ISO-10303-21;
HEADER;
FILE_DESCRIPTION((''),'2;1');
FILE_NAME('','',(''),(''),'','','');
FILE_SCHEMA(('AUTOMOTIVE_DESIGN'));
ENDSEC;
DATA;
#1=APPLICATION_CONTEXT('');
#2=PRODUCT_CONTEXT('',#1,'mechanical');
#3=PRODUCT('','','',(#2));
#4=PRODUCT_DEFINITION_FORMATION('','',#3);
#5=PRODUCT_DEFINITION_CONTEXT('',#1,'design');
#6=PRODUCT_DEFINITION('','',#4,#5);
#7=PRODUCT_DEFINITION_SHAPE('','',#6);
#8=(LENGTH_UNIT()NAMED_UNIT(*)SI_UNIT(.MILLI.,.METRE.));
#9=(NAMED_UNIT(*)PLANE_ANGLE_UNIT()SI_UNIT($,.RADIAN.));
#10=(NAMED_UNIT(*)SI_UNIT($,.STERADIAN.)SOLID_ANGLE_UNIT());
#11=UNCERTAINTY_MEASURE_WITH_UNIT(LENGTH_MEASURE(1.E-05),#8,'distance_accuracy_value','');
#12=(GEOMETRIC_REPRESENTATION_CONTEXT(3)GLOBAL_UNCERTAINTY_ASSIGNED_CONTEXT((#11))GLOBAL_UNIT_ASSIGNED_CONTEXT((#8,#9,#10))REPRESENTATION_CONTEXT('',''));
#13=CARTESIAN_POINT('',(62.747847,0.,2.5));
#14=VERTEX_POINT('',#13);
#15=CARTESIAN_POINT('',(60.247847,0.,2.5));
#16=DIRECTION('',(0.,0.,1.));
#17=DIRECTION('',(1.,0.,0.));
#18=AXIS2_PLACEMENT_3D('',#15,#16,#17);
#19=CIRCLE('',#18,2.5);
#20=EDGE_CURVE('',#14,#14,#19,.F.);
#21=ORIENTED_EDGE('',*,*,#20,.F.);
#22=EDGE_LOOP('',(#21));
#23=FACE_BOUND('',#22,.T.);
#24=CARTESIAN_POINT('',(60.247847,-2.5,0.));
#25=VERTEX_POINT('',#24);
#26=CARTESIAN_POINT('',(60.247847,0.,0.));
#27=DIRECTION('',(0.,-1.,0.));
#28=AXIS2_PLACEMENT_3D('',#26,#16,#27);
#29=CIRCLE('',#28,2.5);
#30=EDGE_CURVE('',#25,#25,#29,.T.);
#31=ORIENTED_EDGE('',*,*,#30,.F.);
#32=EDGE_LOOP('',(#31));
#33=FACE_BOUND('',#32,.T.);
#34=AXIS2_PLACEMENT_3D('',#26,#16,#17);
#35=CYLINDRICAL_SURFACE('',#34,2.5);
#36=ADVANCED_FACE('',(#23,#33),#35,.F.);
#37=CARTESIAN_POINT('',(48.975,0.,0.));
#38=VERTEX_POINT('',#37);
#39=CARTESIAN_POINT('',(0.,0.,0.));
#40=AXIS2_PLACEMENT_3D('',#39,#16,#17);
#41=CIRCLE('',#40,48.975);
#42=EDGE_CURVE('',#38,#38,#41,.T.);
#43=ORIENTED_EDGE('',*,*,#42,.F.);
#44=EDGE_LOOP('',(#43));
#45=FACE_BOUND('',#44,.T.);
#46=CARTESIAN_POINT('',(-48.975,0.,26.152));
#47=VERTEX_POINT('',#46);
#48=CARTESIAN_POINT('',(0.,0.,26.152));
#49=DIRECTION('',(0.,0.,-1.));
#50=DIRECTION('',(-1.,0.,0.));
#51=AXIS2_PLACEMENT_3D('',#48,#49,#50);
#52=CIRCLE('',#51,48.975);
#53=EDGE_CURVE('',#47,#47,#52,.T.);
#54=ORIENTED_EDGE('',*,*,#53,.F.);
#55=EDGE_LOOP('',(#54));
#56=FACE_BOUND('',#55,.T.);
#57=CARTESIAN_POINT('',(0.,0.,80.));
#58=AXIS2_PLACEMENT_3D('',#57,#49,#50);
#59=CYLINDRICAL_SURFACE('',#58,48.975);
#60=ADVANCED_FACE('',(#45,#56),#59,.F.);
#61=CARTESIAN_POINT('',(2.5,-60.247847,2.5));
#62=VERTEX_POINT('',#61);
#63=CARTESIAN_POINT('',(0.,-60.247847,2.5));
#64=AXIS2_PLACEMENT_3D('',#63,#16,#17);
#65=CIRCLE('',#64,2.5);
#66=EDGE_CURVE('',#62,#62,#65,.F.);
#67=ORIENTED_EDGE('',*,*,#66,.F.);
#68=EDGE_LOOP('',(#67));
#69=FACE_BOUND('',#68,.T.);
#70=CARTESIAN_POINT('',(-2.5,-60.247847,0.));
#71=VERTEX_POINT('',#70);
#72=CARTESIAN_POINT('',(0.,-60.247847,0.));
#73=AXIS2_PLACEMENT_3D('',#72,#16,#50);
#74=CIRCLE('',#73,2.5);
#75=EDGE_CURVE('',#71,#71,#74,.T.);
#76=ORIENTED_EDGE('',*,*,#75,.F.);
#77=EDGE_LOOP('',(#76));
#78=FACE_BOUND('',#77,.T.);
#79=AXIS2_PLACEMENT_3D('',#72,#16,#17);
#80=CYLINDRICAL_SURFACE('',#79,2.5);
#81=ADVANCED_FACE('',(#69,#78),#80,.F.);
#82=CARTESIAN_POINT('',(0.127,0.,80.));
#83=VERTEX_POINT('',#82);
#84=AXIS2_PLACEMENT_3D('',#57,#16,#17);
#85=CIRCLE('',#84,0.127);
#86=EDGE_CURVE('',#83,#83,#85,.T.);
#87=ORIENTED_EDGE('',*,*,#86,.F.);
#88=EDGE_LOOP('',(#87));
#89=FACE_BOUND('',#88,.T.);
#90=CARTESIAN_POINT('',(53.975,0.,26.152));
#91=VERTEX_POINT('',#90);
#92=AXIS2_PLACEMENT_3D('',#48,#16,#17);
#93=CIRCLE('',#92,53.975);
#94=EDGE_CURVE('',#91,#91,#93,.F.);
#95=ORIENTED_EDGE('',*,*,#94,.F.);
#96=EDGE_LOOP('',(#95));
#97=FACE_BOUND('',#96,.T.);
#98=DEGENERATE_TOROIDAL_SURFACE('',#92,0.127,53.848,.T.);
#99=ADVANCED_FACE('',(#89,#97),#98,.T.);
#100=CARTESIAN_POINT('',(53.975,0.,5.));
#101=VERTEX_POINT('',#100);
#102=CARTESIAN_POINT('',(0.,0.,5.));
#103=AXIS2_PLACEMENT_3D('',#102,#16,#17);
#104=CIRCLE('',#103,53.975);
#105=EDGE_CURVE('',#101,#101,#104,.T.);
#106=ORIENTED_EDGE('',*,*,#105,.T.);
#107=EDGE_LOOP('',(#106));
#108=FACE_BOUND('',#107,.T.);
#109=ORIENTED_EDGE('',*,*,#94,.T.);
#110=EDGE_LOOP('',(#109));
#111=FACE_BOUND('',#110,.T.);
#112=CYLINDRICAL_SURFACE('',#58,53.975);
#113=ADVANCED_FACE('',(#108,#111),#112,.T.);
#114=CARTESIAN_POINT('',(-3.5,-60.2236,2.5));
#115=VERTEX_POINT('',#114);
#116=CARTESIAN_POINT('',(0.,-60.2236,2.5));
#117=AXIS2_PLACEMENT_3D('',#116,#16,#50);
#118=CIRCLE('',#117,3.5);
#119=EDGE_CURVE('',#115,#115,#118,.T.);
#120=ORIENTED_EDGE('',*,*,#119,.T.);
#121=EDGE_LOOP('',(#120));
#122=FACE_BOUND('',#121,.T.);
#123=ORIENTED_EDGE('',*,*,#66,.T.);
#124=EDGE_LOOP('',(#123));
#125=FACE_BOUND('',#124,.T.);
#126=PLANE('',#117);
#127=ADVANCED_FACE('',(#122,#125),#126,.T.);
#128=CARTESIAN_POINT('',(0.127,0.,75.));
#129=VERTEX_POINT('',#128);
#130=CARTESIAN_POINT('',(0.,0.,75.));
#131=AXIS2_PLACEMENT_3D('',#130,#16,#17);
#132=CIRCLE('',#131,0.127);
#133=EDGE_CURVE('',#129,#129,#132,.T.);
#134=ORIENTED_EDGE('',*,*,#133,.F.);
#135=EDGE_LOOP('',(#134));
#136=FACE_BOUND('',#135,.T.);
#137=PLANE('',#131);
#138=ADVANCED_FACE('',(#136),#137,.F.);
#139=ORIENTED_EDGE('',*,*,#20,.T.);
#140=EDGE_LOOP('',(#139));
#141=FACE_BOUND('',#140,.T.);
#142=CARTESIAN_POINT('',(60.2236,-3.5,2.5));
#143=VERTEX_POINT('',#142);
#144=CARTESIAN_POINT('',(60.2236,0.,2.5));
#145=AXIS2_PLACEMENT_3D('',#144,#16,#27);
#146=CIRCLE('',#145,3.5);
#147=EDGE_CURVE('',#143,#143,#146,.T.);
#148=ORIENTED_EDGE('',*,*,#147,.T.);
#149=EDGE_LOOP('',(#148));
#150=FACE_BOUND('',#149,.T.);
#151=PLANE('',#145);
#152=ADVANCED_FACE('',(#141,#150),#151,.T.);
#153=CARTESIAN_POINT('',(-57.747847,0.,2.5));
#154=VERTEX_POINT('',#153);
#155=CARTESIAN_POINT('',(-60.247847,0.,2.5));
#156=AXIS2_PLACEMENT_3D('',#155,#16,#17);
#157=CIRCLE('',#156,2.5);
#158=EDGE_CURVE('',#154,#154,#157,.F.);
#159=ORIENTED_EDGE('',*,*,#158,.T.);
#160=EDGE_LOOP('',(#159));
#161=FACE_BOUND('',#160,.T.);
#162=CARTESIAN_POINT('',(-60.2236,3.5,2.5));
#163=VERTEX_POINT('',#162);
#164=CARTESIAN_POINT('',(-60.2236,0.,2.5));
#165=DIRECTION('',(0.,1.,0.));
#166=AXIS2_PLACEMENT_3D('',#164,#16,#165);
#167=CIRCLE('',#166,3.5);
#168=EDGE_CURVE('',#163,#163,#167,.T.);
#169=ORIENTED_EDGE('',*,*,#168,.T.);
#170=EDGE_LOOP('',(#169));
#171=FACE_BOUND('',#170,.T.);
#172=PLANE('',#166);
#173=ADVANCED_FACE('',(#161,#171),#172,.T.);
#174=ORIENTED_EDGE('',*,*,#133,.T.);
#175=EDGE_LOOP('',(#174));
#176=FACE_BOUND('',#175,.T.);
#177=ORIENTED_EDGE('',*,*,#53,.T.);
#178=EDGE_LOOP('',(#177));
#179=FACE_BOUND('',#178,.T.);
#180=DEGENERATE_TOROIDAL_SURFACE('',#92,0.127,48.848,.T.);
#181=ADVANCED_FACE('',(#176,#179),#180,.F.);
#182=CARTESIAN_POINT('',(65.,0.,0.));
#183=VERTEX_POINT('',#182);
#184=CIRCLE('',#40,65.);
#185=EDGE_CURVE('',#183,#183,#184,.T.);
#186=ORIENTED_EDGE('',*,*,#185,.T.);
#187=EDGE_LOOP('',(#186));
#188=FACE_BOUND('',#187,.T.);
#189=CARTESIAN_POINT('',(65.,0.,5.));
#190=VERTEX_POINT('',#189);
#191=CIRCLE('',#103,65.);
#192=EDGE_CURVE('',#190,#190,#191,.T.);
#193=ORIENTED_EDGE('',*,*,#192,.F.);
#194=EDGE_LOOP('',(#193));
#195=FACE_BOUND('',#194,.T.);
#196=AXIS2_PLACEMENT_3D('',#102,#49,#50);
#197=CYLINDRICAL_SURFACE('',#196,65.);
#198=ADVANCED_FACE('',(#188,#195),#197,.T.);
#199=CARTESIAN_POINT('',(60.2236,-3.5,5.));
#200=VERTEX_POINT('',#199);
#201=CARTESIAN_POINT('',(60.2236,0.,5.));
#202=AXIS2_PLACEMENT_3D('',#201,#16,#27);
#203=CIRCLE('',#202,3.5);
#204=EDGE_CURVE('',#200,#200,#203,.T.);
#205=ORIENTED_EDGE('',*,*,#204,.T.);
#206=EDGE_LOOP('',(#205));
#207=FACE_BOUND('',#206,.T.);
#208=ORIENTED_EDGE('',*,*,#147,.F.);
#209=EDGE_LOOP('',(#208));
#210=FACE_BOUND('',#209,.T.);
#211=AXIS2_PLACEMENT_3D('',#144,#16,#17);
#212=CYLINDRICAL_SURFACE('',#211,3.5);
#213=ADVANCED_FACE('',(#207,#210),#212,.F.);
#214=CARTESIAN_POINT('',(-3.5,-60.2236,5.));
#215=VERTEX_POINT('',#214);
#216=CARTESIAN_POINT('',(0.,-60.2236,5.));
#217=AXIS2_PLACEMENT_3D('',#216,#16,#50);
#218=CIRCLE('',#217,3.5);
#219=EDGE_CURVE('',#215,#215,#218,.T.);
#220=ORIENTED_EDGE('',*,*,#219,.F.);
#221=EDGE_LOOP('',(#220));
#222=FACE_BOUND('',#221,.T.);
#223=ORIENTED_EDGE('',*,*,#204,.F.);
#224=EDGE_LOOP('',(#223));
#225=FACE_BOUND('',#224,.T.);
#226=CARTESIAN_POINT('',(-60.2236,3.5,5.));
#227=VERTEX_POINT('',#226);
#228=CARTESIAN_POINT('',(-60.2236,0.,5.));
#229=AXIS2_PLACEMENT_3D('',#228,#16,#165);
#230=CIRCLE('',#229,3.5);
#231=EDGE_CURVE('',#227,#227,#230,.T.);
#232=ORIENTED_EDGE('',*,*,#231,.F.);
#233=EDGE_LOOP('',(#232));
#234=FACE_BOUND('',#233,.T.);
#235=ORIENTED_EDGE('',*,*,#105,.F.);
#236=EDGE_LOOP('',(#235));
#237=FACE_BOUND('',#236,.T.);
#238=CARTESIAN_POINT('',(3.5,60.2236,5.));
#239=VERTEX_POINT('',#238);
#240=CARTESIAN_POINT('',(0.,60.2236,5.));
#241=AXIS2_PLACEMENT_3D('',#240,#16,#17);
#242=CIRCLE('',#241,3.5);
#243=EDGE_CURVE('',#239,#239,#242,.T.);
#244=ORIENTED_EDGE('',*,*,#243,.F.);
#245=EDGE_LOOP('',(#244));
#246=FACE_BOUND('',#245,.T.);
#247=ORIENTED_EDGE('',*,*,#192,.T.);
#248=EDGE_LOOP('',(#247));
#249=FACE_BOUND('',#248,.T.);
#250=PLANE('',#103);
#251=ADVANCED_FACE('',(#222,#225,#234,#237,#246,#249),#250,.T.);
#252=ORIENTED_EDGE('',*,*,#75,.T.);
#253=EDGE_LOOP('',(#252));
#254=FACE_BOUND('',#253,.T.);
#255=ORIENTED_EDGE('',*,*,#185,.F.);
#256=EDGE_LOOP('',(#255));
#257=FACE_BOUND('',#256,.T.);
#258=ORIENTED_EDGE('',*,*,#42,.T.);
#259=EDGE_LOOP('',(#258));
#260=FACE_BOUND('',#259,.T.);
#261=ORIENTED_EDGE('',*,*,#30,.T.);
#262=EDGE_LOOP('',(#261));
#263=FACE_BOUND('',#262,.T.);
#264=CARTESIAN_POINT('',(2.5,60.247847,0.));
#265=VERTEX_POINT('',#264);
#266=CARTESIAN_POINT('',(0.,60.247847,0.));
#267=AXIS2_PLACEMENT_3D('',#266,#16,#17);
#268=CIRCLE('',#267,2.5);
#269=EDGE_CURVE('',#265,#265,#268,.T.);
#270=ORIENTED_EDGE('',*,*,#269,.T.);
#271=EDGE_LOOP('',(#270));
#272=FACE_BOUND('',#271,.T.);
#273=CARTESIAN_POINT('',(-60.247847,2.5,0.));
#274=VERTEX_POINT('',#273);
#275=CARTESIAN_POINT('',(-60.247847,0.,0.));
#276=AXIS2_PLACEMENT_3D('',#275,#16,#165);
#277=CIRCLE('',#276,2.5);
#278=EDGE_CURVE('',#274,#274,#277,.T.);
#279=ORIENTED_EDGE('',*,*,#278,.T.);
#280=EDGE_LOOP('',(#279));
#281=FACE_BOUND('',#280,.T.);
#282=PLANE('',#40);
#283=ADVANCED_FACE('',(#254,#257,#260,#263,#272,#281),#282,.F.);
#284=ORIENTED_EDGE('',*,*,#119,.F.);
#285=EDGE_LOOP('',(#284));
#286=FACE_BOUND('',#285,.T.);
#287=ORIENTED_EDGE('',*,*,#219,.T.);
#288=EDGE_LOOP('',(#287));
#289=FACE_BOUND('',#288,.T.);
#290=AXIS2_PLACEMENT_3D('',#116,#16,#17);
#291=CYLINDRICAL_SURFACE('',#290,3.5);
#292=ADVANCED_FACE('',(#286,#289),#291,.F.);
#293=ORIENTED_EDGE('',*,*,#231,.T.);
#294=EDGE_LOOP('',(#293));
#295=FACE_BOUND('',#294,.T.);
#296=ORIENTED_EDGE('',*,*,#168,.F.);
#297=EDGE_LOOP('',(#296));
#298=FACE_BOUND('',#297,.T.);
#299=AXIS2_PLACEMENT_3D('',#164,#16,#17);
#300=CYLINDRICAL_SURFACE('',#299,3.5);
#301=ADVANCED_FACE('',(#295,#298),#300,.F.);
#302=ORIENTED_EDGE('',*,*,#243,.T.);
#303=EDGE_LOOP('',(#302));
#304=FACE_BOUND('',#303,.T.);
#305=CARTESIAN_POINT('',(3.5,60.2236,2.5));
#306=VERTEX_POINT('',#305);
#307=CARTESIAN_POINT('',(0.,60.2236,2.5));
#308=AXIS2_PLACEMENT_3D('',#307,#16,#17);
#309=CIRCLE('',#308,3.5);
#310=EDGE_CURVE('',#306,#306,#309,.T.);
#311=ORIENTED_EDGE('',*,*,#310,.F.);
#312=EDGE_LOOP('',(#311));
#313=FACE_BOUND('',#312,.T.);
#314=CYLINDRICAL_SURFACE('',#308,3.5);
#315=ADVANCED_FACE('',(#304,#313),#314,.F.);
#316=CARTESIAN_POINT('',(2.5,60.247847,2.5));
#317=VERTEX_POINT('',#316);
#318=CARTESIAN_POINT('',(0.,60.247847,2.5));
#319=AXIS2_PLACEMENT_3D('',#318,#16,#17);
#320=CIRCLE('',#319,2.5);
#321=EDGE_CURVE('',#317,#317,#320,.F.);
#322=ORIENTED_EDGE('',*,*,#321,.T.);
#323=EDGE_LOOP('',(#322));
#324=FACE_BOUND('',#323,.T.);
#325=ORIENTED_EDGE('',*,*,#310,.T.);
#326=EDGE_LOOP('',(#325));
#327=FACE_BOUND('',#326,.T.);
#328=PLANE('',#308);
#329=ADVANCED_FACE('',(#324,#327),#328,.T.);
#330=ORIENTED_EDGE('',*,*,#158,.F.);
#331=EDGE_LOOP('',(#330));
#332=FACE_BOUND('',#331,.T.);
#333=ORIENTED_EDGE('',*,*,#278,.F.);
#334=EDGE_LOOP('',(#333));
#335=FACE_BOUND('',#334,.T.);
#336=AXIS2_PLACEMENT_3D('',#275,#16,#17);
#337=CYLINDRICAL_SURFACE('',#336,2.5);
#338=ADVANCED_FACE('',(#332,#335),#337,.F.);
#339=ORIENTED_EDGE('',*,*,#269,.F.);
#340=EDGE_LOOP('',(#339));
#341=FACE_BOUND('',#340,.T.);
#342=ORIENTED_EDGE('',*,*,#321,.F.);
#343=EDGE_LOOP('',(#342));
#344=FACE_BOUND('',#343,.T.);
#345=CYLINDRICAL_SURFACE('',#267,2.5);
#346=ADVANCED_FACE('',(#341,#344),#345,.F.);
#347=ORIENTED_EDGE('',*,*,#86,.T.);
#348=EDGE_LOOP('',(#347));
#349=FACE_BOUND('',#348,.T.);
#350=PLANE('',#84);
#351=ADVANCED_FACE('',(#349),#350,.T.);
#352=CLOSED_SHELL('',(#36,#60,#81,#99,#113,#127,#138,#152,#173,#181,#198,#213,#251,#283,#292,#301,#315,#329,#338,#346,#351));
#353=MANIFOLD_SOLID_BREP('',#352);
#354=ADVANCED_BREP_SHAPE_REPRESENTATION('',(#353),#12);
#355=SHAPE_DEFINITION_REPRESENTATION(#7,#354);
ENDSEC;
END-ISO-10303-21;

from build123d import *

# Parameters (mm, degrees)
SKETCH2_R           = 65
BOSS_EXTRUDE1_DEPTH = 5
SKETCH3_R           = 53.975
BOSS_EXTRUDE2_DEPTH = 75
FILLET7_R           = 53.848
SKETCH7_R           = 2.5
CUT_EXTRUDE2_DEPTH  = 5
SKETCH8_R           = 3.5
CUT_EXTRUDE3_DEPTH  = 2.5
CIRPATTERN1_COUNT   = 4


# Read off the part's stored shape, not the designer's step: Shell1
with BuildPart() as part:
    # Sketch2 → Boss-Extrude1 (new body)
    with BuildSketch(Plane(origin=(0, 0, 0), x_dir=(0, 1, 0), z_dir=(0, 0, 1))):
        with Locations(Location((0, 0, 0), (0, 0, 270))):
            Circle(SKETCH2_R)
    extrude(amount=BOSS_EXTRUDE1_DEPTH)

    # Sketch3 → Boss-Extrude2 (add)
    with BuildSketch(Plane.XY.offset(5)):
        Circle(SKETCH3_R)
    extrude(amount=BOSS_EXTRUDE2_DEPTH)

    # Fillet7
    fillet7_edges = [part.edges().sort_by_distance(p)[0] for p in [
        (-53.975, 0, 80),
    ]]
    fillet(fillet7_edges, radius=FILLET7_R)

    # Shell1 outline → Shell1 (revolve, cut)
    with BuildSketch(Plane.XZ):
        with BuildLine():
            Line((48.975, 0), (48.975, 26.152))
            ThreePointArc((48.975, 26.152), (34.667752047, 60.692752047), (0.127, 75))
            Line((0.127, 75), (0, 75))
            Line((0, 75), (0, 0))
            Line((0, 0), (48.975, 0))
        make_face()
    revolve(axis=Axis((0, 0, 0), (0, 0, 1)), mode=Mode.SUBTRACT)

    # Sketch7 → Cut-Extrude2 (cut)
    with BuildSketch(Plane.XY.offset(5)):
        with Locations((0, 60.247846794)):
            Circle(SKETCH7_R)
    cut_extrude2 = extrude(amount=-CUT_EXTRUDE2_DEPTH, mode=Mode.SUBTRACT)

    # Sketch8 → Cut-Extrude3 (cut)
    with BuildSketch(Plane.XY.offset(5)):
        with Locations((0, 60.223600104)):
            Circle(SKETCH8_R)
    cut_extrude3 = extrude(amount=-CUT_EXTRUDE3_DEPTH, mode=Mode.SUBTRACT)

    # CirPattern1: Cut-Extrude2, Cut-Extrude3 ×4 about axis
    cirpattern1_axis = Axis((0, 0, 0), (0, 0, 1))
    add([cut_extrude2.rotate(cirpattern1_axis, i * 360 / CIRPATTERN1_COUNT) for i in range(1, CIRPATTERN1_COUNT)], mode=Mode.SUBTRACT)
    add([cut_extrude3.rotate(cirpattern1_axis, i * 360 / CIRPATTERN1_COUNT) for i in range(1, CIRPATTERN1_COUNT)], mode=Mode.SUBTRACT)


solid = part.part
